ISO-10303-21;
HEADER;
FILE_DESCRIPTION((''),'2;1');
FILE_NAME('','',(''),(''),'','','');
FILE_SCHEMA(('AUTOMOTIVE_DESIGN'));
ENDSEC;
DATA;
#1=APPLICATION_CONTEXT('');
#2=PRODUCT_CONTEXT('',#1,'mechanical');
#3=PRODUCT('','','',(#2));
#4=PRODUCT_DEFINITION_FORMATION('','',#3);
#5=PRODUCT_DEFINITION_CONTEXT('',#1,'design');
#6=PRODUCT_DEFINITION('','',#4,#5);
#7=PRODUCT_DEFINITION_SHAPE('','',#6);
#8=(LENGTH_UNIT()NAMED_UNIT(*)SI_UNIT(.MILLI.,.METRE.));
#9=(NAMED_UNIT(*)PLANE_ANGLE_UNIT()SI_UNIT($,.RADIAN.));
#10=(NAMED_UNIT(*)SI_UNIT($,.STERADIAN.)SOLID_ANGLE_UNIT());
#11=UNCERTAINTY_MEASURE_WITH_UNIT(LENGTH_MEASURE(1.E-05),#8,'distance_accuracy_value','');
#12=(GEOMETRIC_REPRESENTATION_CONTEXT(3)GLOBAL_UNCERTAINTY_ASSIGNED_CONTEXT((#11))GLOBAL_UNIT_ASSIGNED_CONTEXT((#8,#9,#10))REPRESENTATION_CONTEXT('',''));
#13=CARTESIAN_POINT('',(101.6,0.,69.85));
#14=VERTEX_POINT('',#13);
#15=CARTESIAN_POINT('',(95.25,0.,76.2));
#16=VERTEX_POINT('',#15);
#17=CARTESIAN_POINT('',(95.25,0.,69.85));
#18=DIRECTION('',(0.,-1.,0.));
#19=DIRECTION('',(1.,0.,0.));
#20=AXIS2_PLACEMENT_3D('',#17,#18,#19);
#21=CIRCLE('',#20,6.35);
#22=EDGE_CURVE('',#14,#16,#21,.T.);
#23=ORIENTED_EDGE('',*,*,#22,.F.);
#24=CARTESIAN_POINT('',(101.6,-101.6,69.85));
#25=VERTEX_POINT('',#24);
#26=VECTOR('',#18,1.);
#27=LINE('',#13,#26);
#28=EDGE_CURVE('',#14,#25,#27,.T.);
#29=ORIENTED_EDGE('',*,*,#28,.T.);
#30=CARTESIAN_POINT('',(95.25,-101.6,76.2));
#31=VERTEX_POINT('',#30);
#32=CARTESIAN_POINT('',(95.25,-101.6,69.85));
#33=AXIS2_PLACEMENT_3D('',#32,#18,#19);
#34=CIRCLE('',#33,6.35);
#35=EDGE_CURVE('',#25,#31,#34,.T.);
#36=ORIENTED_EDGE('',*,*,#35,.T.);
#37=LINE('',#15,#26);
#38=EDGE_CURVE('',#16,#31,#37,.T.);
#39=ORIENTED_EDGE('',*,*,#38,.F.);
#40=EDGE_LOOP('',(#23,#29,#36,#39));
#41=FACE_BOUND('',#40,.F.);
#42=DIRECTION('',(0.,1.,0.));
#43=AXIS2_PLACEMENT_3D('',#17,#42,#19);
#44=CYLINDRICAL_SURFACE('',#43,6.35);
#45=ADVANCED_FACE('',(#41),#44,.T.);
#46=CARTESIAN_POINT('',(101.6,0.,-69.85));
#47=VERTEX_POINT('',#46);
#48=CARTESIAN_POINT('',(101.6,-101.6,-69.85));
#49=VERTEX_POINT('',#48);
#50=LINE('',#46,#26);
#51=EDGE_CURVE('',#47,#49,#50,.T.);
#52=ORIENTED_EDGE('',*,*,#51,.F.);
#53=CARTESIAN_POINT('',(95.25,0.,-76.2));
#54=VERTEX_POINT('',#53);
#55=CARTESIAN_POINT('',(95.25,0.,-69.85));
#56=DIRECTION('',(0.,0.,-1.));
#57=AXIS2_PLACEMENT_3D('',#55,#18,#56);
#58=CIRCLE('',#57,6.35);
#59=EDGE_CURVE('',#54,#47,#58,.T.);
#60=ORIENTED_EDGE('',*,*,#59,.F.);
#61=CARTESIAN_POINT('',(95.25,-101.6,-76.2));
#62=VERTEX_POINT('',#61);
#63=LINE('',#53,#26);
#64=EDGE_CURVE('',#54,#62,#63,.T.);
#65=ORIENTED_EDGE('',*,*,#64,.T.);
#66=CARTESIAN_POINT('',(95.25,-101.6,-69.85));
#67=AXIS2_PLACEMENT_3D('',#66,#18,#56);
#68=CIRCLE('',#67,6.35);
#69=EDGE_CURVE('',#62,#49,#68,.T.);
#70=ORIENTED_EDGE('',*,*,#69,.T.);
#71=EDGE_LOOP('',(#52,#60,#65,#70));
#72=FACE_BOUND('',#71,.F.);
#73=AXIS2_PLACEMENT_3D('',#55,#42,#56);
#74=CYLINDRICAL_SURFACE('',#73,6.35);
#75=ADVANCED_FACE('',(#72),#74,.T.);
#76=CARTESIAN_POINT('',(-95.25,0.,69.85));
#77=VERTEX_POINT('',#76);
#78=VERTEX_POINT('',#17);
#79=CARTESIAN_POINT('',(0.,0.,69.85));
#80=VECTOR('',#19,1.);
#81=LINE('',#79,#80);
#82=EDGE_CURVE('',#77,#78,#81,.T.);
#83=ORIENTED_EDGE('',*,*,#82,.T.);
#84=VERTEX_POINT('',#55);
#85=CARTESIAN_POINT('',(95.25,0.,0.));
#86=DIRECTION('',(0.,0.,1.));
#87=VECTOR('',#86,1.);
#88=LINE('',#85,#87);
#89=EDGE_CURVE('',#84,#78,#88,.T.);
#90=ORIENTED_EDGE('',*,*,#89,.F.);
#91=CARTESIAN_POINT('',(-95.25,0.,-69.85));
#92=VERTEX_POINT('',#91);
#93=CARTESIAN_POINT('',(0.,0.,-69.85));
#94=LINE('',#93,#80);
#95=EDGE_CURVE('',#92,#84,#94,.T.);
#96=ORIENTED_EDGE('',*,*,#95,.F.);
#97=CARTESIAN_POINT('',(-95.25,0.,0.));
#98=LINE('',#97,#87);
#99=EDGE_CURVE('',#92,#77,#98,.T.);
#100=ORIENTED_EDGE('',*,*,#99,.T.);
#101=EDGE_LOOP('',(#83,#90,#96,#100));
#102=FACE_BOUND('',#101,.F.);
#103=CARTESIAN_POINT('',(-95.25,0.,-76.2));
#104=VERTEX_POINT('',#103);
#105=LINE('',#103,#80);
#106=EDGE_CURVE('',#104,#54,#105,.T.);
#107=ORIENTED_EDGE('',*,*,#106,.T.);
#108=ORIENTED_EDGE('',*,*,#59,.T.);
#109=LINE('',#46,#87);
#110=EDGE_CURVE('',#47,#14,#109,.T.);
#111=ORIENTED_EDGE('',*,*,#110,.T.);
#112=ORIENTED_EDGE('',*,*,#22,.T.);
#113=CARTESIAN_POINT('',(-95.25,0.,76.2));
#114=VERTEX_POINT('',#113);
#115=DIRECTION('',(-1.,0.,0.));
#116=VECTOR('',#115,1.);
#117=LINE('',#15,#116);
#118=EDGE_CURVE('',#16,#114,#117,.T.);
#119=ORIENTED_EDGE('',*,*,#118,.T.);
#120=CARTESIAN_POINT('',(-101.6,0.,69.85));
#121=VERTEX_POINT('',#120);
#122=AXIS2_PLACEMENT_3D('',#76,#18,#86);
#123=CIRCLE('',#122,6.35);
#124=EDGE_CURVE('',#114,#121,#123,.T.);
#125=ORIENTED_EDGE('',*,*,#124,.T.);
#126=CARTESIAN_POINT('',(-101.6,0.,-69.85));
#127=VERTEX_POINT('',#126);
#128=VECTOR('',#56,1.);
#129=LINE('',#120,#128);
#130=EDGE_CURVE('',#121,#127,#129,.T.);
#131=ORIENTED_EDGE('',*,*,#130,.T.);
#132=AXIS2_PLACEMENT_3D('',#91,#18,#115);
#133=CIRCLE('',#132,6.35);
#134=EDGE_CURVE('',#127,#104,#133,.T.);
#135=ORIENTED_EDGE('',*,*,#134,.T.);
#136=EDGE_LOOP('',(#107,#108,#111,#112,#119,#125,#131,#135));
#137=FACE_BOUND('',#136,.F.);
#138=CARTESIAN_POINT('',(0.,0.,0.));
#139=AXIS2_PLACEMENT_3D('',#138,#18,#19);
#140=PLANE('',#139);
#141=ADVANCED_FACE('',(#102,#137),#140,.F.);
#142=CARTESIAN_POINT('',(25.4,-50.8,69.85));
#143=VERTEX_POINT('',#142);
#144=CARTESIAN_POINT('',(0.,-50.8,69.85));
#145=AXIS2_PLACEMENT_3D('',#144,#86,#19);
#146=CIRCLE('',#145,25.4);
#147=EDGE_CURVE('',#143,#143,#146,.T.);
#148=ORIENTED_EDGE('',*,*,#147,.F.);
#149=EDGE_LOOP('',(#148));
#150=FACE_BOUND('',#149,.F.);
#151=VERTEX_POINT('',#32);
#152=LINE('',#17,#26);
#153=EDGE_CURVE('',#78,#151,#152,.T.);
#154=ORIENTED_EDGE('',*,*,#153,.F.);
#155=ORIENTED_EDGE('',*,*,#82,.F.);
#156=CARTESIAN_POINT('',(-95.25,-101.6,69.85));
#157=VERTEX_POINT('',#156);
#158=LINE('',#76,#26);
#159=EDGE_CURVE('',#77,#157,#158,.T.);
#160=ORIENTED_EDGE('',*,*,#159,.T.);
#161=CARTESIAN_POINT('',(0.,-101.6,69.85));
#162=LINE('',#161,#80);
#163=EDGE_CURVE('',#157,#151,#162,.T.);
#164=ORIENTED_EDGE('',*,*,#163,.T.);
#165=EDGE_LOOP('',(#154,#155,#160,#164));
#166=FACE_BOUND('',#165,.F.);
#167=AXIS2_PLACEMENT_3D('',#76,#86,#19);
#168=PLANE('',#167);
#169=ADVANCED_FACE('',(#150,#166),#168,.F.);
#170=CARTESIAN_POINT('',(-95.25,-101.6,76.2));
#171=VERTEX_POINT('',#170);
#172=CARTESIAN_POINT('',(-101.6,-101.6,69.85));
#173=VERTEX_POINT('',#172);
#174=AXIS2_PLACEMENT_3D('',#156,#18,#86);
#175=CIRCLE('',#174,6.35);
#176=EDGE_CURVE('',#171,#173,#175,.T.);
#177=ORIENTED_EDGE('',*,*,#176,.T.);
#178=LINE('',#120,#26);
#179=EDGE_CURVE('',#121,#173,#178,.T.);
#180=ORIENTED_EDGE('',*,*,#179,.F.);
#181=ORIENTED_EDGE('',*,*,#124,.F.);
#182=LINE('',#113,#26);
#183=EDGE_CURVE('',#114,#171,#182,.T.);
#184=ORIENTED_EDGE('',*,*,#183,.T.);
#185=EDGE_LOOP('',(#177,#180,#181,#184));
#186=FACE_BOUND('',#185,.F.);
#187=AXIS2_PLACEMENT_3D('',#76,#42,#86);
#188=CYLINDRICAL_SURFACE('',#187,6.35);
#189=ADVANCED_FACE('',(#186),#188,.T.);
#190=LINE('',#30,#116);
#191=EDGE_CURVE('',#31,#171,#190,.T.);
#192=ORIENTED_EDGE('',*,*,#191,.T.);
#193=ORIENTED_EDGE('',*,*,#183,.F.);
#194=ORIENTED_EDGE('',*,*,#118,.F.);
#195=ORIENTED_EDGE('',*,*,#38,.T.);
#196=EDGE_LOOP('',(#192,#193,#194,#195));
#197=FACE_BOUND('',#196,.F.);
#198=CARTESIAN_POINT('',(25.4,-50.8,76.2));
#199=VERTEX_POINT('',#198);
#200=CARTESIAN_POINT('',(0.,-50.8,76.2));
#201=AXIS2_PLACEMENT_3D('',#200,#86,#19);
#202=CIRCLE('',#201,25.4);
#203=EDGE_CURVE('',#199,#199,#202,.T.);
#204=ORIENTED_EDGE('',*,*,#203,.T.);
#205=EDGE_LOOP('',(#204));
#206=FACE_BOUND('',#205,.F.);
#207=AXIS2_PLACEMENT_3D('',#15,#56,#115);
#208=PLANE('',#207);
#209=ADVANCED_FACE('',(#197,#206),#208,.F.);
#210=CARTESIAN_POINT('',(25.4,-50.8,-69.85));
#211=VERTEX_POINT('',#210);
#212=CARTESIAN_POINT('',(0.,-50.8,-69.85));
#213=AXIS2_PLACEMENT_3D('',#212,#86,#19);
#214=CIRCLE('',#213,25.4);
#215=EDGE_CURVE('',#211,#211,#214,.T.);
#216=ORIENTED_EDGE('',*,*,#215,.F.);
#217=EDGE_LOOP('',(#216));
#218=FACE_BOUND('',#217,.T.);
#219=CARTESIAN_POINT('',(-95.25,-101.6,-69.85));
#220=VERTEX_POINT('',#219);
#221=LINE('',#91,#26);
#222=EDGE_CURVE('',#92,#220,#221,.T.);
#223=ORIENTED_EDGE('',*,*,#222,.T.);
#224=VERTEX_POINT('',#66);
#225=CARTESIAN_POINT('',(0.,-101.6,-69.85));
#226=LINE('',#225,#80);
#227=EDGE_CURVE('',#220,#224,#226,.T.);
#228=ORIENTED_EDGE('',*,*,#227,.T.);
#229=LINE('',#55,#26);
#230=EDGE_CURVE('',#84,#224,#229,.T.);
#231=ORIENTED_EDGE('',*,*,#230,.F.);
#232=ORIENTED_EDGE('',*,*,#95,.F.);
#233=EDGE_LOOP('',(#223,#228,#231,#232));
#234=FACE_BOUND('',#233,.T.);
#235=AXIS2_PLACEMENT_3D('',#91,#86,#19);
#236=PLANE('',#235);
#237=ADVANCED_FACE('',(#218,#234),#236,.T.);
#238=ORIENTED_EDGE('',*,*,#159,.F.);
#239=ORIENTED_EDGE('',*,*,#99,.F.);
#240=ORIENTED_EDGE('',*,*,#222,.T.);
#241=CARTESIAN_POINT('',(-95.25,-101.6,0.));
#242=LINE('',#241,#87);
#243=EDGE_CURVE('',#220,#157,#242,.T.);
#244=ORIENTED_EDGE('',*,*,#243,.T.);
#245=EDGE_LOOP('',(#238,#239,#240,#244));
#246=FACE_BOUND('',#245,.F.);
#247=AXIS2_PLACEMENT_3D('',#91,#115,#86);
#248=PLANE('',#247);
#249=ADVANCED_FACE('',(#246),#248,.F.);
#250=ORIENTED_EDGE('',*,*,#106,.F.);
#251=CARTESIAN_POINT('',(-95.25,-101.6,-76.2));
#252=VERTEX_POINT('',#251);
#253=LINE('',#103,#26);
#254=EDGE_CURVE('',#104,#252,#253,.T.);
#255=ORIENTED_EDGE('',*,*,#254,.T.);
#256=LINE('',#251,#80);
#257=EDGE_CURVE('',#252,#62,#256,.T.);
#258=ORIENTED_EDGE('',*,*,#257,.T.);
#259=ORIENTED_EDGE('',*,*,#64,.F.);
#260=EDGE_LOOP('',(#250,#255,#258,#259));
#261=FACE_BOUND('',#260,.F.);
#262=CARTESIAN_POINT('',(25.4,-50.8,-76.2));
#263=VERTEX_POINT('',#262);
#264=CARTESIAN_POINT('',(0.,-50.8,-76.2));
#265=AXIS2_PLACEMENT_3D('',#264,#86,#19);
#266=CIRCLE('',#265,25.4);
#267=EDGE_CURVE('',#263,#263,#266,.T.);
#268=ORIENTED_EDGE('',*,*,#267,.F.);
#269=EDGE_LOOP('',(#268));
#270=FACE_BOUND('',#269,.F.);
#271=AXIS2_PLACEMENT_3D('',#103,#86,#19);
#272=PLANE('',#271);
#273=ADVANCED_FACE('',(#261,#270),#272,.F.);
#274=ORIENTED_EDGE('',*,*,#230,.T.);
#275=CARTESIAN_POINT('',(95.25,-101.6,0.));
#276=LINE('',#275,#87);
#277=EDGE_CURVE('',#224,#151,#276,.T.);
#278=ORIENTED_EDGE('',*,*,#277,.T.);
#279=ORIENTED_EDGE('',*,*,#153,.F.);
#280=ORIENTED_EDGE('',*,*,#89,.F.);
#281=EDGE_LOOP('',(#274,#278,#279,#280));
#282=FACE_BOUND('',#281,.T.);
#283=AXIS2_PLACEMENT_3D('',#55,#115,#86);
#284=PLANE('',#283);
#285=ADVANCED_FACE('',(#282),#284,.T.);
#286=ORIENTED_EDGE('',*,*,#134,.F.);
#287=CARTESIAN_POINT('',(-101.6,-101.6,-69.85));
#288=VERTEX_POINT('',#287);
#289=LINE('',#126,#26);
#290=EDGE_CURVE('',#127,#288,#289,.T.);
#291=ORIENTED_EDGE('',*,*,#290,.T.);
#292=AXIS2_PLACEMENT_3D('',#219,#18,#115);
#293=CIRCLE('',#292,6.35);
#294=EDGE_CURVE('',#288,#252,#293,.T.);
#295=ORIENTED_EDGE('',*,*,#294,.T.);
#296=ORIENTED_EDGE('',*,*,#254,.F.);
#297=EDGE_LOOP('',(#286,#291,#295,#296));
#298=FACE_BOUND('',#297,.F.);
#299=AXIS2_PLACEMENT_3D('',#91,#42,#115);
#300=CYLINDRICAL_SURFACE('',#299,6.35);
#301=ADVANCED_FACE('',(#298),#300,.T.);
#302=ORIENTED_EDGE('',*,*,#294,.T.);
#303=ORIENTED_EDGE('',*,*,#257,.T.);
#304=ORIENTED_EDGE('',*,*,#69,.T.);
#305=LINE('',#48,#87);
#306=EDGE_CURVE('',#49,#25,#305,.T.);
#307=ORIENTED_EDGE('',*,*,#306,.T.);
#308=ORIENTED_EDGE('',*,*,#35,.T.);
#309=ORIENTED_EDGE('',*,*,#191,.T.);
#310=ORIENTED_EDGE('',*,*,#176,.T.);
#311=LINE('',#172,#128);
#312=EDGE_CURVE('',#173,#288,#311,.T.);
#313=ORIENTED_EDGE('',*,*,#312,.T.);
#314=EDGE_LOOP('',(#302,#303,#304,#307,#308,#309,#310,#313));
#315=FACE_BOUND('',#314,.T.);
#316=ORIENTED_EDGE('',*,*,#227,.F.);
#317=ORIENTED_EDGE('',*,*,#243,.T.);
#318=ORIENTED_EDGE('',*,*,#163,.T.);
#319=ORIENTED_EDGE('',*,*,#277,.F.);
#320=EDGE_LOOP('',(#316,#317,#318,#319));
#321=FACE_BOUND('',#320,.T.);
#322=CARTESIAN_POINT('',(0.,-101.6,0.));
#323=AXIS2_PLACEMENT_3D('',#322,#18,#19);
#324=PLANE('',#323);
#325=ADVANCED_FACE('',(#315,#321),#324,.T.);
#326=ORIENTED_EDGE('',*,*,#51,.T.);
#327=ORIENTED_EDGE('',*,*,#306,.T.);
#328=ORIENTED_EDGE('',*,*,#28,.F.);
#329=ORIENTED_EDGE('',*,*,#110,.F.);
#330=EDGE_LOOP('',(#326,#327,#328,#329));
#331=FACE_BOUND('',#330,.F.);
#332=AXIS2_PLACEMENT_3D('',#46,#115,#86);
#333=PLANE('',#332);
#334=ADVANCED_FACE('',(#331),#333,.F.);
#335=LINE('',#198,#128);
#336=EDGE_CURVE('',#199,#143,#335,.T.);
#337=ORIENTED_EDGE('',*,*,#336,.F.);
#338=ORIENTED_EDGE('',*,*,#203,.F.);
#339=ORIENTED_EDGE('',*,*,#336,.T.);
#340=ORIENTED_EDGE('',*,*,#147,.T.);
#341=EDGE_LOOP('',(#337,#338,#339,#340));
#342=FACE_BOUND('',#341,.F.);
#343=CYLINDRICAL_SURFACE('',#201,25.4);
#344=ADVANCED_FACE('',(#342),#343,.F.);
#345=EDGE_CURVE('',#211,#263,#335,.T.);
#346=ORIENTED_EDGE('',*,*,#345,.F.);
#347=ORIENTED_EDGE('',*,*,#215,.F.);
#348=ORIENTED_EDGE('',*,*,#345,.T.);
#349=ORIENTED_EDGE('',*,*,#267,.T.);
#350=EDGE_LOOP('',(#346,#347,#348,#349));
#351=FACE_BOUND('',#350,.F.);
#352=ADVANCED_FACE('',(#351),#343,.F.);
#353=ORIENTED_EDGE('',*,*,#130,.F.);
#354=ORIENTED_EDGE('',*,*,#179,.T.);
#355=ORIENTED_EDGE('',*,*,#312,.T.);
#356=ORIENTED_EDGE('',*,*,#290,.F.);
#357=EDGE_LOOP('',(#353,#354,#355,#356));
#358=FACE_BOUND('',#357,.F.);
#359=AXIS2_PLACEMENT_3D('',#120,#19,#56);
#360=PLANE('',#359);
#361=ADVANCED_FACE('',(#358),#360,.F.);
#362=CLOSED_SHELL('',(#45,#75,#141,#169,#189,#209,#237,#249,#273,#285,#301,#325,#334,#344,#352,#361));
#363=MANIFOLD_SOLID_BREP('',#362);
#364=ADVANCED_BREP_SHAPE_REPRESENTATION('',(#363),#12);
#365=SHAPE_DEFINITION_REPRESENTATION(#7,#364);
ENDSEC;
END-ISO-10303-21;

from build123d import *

# Parameters (mm, degrees)
F0_W     = 190.5
F0_H     = 139.7
F1_DEPTH = 101.6
F2_R     = 25.4
F3_DEPTH = 152.401


# Not quite as in the source:
# - ends of sketch curves that miss each other by under 0.0002 mm in the source are joined


with BuildPart() as f1:
    # F0 (on Front) → F1 (new body)
    with BuildSketch(Plane.XZ):
        with BuildLine():
            Line((-95.25, -76.2), (95.25, -76.2))
            ThreePointArc((95.25, -76.2), (99.7401280605, -74.3401280605), (101.6, -69.85))
            Line((101.6, -69.85), (101.6, 69.85))
            ThreePointArc((101.6, 69.85), (99.7401280605, 74.3401280605), (95.25, 76.2))
            Line((95.25, 76.2), (-95.25, 76.2))
            ThreePointArc((-95.25, 76.2), (-99.7401280605, 74.3401280605), (-101.6, 69.85))
            Line((-101.6, 69.85), (-101.6, -69.85))
            ThreePointArc((-101.6, -69.85), (-99.7401280605, -74.3401280605), (-95.25, -76.2))
        make_face()
        Rectangle(F0_W, F0_H, mode=Mode.SUBTRACT)
    extrude(amount=F1_DEPTH)

    # F2 (on face) → F3 (cut, through all)
    with BuildSketch(Plane.XY.offset(76.2)):
        with Locations((0, -50.8)):
            Circle(F2_R)
    extrude(amount=-F3_DEPTH, mode=Mode.SUBTRACT)


solid = f1.part
